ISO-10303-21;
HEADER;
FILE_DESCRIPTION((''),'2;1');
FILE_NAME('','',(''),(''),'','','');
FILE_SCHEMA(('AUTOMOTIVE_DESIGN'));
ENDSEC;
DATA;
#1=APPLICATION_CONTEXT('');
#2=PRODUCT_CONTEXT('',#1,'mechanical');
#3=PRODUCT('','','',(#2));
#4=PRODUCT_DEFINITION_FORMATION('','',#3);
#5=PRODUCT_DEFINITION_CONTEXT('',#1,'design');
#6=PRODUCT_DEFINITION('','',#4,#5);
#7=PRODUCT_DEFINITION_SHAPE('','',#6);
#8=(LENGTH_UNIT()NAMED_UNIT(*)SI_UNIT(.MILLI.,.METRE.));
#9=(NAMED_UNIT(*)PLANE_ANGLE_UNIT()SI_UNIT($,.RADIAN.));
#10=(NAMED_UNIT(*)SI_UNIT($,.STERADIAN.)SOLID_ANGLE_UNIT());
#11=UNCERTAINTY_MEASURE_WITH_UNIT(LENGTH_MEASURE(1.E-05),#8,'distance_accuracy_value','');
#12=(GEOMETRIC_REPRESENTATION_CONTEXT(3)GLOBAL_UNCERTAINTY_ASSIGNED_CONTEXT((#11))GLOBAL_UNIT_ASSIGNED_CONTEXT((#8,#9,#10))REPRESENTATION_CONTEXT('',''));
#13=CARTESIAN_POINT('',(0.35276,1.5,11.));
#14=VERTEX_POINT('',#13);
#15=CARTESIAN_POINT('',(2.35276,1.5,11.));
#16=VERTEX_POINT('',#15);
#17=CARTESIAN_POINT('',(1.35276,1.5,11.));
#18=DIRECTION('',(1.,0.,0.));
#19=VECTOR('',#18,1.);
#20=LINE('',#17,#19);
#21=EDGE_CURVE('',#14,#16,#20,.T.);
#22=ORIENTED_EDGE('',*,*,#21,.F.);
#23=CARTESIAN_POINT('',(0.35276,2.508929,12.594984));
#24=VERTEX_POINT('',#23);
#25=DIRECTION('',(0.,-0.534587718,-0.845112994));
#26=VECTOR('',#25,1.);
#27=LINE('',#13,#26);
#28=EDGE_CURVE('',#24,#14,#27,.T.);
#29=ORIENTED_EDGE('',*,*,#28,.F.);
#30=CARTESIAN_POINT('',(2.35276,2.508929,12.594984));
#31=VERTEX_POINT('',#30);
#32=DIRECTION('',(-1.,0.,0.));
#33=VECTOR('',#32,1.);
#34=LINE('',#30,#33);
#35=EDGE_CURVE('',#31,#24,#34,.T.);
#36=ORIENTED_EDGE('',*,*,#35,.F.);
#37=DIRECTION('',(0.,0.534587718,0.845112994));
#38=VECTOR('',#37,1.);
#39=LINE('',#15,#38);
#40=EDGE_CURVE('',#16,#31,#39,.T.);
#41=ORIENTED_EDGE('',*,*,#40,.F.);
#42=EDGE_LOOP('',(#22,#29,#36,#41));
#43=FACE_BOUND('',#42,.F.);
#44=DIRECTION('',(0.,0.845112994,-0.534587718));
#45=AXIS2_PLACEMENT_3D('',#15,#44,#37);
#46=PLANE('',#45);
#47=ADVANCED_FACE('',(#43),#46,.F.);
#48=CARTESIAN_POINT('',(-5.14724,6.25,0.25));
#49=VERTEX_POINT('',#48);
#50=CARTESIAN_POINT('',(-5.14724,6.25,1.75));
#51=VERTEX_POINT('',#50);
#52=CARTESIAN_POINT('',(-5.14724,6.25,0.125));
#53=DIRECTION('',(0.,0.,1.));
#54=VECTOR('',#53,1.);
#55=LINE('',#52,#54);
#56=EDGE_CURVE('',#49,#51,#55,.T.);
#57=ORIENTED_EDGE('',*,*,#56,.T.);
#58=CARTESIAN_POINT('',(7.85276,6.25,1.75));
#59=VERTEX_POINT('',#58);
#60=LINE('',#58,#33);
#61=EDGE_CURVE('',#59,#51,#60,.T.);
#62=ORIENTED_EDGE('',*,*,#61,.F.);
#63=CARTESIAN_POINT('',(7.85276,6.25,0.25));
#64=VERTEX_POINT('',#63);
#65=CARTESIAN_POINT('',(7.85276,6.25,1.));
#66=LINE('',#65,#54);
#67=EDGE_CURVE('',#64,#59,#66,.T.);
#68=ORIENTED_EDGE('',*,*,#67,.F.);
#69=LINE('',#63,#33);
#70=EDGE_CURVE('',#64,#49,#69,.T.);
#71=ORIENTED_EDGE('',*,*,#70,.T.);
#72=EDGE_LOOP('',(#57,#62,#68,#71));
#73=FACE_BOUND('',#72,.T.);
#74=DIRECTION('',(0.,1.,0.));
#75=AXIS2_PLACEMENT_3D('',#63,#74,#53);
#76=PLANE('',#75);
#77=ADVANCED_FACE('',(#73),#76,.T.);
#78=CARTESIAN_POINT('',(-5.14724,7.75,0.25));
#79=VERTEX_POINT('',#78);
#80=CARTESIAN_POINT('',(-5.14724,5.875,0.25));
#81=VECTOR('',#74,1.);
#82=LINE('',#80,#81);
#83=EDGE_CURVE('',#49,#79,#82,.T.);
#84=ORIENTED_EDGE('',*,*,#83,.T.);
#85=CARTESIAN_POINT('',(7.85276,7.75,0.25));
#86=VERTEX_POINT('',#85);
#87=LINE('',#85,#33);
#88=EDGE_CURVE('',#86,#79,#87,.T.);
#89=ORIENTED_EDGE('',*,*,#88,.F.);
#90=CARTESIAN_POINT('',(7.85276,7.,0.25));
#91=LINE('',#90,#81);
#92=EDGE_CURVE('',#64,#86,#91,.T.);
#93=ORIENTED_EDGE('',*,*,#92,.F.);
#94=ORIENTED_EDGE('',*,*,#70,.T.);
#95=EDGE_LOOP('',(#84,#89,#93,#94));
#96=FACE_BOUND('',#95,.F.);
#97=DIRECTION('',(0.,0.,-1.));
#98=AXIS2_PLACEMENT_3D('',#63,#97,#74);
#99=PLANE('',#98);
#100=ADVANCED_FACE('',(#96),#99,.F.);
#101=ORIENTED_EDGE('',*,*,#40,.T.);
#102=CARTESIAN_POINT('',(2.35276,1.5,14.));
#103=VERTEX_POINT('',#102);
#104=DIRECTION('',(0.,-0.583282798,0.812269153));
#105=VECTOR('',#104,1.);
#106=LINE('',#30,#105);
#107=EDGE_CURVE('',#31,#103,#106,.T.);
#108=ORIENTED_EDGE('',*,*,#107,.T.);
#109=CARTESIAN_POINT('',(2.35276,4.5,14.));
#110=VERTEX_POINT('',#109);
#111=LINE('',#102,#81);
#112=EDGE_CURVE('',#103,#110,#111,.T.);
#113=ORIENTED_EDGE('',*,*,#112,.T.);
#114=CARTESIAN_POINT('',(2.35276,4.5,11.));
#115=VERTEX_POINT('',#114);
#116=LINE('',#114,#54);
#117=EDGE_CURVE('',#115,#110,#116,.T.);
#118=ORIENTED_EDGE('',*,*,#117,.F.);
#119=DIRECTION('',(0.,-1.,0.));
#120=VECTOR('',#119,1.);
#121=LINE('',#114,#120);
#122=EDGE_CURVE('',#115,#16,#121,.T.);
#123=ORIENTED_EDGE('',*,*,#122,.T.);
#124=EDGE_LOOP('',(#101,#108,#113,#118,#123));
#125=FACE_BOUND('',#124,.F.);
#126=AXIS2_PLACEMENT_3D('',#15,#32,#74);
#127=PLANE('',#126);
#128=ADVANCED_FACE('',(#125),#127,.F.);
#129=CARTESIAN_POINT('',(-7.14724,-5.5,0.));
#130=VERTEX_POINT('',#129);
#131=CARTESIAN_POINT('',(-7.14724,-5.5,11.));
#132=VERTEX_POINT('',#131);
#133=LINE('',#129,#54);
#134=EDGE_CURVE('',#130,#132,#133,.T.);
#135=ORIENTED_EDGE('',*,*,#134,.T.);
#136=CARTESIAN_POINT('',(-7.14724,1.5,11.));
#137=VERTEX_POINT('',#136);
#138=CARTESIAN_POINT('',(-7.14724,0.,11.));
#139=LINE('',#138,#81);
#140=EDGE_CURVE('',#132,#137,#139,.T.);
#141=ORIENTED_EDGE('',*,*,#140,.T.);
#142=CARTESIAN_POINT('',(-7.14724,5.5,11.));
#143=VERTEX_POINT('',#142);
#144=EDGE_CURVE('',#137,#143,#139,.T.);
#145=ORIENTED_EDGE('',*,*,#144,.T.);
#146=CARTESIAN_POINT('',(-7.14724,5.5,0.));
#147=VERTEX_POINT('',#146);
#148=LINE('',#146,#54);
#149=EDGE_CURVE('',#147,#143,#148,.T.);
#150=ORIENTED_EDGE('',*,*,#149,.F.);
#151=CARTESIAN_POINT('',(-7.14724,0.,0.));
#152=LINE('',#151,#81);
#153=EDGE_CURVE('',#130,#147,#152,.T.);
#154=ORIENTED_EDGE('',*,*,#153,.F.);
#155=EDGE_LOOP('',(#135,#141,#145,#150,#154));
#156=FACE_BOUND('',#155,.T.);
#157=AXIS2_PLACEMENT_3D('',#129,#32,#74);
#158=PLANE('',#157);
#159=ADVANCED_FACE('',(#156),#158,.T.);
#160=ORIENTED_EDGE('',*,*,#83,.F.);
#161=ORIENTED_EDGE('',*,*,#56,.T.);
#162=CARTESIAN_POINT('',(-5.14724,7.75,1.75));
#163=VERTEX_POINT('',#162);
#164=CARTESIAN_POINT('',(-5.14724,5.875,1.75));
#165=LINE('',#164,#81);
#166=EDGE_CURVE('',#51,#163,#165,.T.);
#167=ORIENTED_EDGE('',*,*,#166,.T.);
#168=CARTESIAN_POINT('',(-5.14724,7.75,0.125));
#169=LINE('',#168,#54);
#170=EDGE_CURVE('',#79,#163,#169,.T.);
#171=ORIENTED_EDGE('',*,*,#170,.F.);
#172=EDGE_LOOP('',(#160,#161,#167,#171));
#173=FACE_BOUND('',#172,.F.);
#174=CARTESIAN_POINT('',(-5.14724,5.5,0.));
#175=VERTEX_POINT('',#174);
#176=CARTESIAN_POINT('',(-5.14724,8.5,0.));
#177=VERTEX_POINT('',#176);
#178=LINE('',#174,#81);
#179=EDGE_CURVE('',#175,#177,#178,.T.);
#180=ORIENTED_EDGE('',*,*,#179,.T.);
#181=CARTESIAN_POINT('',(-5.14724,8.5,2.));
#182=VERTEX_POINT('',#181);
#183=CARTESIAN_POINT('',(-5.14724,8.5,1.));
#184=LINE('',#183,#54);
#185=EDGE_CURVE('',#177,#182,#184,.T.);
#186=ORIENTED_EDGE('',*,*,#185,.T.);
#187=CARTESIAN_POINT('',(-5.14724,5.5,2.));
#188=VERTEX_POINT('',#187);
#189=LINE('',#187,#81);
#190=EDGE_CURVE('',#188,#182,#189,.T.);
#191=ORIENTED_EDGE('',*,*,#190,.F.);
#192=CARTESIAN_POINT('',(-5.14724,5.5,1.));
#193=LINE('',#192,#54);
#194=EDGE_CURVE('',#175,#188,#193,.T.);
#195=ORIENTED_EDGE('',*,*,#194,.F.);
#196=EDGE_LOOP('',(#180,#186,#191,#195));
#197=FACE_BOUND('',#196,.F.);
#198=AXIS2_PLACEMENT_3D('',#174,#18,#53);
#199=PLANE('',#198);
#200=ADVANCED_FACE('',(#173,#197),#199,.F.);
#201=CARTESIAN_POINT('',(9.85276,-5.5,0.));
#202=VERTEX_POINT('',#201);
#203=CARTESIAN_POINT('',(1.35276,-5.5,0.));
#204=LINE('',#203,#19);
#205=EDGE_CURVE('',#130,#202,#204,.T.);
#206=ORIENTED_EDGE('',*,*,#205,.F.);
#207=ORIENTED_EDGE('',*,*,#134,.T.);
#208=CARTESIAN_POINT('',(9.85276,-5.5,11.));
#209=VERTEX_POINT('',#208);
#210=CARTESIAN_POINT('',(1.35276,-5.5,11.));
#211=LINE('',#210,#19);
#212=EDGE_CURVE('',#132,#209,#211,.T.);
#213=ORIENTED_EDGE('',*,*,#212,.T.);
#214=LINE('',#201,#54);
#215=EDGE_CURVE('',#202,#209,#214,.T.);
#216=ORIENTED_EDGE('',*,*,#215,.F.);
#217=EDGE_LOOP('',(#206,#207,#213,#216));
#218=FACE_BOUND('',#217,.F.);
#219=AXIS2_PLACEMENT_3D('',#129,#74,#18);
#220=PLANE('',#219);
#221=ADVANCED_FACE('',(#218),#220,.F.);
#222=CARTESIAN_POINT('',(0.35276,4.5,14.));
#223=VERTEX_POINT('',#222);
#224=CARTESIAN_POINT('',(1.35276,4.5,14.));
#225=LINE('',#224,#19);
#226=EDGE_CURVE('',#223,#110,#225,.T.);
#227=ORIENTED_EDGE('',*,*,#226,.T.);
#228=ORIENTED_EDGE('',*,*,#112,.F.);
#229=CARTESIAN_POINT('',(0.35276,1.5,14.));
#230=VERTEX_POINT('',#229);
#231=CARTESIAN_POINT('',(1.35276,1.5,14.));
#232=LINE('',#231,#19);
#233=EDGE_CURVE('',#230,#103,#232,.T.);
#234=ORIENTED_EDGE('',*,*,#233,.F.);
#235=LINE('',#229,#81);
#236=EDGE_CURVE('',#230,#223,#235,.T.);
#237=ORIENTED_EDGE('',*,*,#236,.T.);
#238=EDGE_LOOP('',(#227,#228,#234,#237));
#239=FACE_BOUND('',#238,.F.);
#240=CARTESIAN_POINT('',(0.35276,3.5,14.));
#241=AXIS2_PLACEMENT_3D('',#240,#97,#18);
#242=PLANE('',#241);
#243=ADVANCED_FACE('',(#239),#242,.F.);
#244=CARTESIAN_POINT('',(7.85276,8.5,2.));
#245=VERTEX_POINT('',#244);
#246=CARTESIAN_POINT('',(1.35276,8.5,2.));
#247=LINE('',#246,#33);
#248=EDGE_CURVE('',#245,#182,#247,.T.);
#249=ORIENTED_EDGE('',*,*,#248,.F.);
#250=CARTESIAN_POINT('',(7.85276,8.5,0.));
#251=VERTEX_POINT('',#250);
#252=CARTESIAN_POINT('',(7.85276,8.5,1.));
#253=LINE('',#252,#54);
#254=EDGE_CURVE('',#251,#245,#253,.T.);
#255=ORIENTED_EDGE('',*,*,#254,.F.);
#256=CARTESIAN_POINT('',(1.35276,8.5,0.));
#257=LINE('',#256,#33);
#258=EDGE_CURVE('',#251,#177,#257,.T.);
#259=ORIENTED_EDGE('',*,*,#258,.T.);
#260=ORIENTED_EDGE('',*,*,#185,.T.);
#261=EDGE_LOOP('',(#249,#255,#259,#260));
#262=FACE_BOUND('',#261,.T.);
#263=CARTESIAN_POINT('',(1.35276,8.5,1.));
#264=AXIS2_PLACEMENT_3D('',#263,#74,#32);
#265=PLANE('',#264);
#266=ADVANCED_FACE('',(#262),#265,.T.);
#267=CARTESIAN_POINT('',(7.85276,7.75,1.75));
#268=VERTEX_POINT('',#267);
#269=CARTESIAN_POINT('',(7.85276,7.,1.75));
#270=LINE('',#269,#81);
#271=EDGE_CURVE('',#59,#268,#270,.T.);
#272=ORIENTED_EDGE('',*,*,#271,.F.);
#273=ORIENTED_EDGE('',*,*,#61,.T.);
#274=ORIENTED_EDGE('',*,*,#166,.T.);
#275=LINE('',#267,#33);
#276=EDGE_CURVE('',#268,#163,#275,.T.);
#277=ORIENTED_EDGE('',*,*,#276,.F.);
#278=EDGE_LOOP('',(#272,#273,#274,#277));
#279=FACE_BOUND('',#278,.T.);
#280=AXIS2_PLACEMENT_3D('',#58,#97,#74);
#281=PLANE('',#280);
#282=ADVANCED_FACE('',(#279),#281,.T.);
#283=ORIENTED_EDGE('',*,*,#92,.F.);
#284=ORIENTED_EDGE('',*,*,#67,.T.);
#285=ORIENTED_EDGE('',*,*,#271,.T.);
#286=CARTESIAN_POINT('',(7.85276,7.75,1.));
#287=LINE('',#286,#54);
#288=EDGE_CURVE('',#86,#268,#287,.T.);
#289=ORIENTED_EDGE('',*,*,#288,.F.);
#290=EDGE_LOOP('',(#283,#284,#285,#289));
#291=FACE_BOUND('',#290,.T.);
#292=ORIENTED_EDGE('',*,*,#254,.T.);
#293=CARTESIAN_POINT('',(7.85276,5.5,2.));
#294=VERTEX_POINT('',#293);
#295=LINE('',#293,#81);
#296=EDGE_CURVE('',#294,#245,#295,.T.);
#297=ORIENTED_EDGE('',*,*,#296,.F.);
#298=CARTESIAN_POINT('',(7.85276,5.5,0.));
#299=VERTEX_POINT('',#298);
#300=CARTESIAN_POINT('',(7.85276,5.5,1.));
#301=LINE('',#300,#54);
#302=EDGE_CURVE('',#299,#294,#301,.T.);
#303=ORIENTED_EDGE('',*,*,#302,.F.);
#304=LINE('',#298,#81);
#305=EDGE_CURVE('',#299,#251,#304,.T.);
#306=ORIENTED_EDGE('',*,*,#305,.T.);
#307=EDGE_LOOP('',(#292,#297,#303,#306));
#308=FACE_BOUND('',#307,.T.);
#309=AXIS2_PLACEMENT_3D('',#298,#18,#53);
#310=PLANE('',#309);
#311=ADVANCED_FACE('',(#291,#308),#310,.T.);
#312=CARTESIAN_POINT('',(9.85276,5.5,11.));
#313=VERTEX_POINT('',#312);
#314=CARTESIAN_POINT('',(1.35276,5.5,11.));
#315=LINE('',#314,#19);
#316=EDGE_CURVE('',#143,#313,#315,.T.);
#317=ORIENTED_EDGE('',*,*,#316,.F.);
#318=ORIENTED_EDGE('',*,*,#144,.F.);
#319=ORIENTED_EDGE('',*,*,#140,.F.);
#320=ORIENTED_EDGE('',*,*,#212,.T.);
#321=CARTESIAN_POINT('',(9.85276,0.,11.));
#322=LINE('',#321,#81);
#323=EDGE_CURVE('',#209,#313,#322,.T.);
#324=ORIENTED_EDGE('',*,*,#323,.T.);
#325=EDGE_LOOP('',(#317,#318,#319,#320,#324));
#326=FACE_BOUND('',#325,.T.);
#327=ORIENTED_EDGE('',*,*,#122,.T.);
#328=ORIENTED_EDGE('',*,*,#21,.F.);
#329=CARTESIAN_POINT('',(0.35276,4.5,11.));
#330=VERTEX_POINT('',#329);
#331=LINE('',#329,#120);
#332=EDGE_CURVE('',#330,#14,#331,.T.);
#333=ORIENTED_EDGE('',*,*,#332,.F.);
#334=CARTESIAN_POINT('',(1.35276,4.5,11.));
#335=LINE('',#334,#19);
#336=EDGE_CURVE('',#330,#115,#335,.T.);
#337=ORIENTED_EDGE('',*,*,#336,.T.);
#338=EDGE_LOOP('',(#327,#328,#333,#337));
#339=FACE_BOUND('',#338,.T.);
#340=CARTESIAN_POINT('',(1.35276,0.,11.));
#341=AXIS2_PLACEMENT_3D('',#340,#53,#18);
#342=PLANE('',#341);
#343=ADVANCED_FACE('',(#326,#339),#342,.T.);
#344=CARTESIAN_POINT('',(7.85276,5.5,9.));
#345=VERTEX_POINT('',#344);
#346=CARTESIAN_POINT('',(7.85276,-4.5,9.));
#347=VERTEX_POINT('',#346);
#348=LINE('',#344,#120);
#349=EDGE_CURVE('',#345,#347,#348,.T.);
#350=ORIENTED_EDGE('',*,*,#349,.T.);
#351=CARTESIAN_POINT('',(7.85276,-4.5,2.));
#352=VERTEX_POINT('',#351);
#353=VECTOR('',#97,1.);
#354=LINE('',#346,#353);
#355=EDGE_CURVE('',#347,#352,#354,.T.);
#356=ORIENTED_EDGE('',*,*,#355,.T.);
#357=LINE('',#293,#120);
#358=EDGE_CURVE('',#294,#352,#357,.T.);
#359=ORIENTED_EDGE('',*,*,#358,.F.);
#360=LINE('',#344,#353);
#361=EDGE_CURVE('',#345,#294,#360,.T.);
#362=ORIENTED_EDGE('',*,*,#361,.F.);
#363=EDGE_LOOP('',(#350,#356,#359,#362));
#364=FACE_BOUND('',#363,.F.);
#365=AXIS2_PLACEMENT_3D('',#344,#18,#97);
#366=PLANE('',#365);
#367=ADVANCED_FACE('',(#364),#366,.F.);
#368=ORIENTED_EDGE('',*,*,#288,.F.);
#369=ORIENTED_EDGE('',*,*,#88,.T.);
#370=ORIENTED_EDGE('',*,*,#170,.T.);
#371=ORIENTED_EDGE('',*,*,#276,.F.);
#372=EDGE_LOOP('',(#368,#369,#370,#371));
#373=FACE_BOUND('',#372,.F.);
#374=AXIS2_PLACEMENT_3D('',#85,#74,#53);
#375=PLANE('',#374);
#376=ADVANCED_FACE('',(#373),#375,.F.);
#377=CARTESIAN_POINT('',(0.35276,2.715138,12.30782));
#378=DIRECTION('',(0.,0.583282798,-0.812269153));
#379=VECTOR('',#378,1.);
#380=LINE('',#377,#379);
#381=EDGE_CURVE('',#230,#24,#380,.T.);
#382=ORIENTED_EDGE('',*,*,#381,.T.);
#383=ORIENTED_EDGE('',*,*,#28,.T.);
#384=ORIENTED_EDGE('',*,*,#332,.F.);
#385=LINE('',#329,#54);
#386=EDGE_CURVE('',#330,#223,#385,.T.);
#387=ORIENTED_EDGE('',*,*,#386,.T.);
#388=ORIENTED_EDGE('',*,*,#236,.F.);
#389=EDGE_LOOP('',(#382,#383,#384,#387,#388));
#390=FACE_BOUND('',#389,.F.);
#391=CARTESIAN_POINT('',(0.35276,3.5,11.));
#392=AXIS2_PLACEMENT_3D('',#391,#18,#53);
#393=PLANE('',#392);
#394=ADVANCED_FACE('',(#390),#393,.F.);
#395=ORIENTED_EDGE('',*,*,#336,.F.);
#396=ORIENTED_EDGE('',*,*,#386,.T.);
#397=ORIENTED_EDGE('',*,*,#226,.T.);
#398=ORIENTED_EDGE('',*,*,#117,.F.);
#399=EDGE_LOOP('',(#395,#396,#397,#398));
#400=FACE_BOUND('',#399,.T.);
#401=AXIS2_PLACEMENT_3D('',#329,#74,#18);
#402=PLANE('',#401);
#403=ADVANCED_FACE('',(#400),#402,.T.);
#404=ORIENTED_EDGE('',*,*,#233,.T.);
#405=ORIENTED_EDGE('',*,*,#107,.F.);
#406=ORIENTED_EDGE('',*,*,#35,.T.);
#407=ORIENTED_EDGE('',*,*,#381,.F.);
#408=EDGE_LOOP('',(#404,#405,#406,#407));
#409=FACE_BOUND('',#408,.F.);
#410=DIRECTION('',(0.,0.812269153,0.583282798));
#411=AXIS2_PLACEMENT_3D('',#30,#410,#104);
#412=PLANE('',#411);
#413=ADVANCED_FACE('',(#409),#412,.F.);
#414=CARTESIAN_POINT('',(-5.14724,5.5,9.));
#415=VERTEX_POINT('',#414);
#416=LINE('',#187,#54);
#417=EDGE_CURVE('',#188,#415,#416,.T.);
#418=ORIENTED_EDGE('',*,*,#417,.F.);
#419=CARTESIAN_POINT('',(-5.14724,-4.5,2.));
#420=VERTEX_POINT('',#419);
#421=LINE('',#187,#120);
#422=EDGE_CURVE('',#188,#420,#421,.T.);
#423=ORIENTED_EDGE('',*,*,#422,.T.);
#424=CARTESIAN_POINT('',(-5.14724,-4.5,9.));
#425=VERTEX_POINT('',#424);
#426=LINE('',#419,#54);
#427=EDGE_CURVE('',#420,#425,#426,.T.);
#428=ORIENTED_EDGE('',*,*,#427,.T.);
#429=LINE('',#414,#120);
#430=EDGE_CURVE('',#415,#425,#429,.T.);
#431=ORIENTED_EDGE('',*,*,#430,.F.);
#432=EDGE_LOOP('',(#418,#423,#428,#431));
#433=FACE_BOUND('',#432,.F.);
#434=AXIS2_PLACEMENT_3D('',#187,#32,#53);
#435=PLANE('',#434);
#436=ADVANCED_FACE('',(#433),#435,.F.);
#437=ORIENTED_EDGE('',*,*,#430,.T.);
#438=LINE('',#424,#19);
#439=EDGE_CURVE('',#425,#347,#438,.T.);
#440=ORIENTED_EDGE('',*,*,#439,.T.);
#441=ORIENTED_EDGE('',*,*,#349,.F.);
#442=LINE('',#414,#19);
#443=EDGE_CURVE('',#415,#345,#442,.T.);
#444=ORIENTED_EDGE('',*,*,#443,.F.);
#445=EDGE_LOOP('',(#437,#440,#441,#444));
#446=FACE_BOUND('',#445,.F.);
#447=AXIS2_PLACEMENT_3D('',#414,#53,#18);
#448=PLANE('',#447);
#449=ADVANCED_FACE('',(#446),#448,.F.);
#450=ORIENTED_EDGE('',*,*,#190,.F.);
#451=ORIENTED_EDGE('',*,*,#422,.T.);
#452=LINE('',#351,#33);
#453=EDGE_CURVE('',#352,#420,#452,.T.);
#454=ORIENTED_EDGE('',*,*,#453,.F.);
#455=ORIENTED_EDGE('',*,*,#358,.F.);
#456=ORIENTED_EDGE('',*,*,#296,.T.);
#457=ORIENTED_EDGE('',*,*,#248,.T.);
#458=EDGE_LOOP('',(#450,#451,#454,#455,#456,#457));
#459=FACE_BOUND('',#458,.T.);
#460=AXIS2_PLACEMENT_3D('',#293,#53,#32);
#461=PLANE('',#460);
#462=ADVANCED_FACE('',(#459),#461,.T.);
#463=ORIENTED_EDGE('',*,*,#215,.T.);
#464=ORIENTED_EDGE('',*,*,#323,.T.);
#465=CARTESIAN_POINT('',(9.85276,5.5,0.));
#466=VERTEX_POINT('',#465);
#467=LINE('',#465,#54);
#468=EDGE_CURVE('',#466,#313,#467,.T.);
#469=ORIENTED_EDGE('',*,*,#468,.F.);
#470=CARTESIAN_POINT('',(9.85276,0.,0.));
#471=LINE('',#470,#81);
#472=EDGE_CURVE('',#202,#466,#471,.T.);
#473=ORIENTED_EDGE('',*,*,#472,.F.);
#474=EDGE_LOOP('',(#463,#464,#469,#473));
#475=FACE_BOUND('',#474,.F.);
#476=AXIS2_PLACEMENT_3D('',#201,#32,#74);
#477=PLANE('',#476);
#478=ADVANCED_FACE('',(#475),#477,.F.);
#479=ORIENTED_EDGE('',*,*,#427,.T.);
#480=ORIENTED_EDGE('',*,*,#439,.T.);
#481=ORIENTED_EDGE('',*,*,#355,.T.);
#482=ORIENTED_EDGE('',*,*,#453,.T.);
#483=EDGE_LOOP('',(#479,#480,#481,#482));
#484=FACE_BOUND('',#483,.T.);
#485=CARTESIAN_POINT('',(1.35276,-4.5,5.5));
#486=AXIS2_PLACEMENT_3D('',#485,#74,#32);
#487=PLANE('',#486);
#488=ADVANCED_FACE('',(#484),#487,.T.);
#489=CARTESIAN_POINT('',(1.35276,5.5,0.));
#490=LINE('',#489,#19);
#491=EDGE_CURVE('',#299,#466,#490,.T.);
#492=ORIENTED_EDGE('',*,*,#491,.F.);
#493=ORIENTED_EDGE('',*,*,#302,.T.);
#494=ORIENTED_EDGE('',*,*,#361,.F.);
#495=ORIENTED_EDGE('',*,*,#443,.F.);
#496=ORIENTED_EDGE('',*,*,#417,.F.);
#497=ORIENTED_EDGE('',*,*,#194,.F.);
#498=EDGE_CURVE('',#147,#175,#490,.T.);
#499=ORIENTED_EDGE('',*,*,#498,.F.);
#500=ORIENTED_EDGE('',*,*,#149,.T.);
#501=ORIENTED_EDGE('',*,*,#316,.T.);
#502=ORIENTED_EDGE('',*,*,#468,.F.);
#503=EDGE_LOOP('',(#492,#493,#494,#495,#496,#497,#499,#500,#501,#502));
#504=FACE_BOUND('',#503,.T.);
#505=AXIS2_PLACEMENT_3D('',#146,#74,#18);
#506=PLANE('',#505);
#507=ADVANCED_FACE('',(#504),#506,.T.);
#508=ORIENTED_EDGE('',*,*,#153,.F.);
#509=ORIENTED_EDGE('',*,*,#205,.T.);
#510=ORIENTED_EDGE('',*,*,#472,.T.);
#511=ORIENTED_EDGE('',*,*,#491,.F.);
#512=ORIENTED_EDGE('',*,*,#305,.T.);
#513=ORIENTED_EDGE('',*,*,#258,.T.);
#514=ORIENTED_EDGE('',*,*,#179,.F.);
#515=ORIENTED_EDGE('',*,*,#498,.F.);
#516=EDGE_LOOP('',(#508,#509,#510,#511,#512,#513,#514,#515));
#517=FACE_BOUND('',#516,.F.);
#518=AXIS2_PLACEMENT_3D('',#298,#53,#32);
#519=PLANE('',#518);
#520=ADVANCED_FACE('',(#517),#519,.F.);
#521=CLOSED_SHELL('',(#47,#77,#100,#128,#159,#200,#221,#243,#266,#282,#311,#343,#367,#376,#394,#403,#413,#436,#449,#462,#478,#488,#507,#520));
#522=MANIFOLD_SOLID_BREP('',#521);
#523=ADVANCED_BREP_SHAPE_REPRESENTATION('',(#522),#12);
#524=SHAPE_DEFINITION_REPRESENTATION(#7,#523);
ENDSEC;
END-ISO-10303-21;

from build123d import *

# Parameters (mm, degrees)
F0_W      = 17
F0_H      = 11
F1_DEPTH  = 11
F3_DEPTH  = 10
F4_W      = 13
F4_H      = 2
F5_DEPTH  = 3
F6_W      = 1.5
F6_H      = 1.5
F7_DEPTH  = 15.001
F8_W      = 2
F8_H      = 2
F9_DEPTH  = 3
F11_DEPTH = 9.501
F12_DEPTH = 1


# Not quite as in the source:
# - a feature names something its author has since deleted; it is built from what else it names


with BuildPart() as f1:
    # F0 (on Top) → F1 (new body)
    with BuildSketch(Plane.XY):
        with Locations((1.3527604751, 0)):
            Rectangle(F0_W, F0_H)
    extrude(amount=F1_DEPTH)

    # F2 (on face) → F3 (cut)
    with BuildSketch(Plane(origin=(0, 5.5, 0), x_dir=(-1, 0, 0), z_dir=(0, 1, 0))):
        Polygon((-7.8527604751, 2), (-1.3527604751, 2), (5.1472395249, 2), (5.1472395249, 5.5), (5.1472395249, 9), (-1.3527604751, 9), (-7.8527604751, 9), (-7.8527604751, 5.5), align=None)
    extrude(amount=-F3_DEPTH, mode=Mode.SUBTRACT)

    # F4 (on face) → F5 (join)
    with BuildSketch(Plane(origin=(0, 5.5, 0), x_dir=(-1, 0, 0), z_dir=(0, 1, 0))):
        with Locations((-1.3527604751, 1)):
            Rectangle(F4_W, F4_H)
    extrude(amount=F5_DEPTH)

    # F6 (on face) → F7 (cut, through all)
    with BuildSketch(Plane.YZ.offset(7.8527604751)):
        with Locations((7, 1)):
            Rectangle(F6_W, F6_H)
    extrude(amount=-F7_DEPTH, mode=Mode.SUBTRACT)

    # F8 (on face) → F9 (join)
    with BuildSketch(Plane.XY.offset(11)):
        with Locations((1.3527604751, 2.5)):
            Rectangle(F8_W, F8_H)
    extrude(amount=F9_DEPTH)

    # F10 (on face) → F11 (cut, through all)
    with BuildSketch(Plane.YZ.offset(2.3527604751)):
        Polygon((2.5089287665, 12.594983913), (1.5, 14), (1.5, 11), align=None)
    extrude(amount=-F11_DEPTH, mode=Mode.SUBTRACT)

    # F12 (add): a face of the model
    f12_faces = [f1.faces().sort_by_distance(p)[0] for p in [
        (1.3527604751, 3.5, 12.5),
    ]]
    extrude(f12_faces, amount=F12_DEPTH)


solid = f1.part
